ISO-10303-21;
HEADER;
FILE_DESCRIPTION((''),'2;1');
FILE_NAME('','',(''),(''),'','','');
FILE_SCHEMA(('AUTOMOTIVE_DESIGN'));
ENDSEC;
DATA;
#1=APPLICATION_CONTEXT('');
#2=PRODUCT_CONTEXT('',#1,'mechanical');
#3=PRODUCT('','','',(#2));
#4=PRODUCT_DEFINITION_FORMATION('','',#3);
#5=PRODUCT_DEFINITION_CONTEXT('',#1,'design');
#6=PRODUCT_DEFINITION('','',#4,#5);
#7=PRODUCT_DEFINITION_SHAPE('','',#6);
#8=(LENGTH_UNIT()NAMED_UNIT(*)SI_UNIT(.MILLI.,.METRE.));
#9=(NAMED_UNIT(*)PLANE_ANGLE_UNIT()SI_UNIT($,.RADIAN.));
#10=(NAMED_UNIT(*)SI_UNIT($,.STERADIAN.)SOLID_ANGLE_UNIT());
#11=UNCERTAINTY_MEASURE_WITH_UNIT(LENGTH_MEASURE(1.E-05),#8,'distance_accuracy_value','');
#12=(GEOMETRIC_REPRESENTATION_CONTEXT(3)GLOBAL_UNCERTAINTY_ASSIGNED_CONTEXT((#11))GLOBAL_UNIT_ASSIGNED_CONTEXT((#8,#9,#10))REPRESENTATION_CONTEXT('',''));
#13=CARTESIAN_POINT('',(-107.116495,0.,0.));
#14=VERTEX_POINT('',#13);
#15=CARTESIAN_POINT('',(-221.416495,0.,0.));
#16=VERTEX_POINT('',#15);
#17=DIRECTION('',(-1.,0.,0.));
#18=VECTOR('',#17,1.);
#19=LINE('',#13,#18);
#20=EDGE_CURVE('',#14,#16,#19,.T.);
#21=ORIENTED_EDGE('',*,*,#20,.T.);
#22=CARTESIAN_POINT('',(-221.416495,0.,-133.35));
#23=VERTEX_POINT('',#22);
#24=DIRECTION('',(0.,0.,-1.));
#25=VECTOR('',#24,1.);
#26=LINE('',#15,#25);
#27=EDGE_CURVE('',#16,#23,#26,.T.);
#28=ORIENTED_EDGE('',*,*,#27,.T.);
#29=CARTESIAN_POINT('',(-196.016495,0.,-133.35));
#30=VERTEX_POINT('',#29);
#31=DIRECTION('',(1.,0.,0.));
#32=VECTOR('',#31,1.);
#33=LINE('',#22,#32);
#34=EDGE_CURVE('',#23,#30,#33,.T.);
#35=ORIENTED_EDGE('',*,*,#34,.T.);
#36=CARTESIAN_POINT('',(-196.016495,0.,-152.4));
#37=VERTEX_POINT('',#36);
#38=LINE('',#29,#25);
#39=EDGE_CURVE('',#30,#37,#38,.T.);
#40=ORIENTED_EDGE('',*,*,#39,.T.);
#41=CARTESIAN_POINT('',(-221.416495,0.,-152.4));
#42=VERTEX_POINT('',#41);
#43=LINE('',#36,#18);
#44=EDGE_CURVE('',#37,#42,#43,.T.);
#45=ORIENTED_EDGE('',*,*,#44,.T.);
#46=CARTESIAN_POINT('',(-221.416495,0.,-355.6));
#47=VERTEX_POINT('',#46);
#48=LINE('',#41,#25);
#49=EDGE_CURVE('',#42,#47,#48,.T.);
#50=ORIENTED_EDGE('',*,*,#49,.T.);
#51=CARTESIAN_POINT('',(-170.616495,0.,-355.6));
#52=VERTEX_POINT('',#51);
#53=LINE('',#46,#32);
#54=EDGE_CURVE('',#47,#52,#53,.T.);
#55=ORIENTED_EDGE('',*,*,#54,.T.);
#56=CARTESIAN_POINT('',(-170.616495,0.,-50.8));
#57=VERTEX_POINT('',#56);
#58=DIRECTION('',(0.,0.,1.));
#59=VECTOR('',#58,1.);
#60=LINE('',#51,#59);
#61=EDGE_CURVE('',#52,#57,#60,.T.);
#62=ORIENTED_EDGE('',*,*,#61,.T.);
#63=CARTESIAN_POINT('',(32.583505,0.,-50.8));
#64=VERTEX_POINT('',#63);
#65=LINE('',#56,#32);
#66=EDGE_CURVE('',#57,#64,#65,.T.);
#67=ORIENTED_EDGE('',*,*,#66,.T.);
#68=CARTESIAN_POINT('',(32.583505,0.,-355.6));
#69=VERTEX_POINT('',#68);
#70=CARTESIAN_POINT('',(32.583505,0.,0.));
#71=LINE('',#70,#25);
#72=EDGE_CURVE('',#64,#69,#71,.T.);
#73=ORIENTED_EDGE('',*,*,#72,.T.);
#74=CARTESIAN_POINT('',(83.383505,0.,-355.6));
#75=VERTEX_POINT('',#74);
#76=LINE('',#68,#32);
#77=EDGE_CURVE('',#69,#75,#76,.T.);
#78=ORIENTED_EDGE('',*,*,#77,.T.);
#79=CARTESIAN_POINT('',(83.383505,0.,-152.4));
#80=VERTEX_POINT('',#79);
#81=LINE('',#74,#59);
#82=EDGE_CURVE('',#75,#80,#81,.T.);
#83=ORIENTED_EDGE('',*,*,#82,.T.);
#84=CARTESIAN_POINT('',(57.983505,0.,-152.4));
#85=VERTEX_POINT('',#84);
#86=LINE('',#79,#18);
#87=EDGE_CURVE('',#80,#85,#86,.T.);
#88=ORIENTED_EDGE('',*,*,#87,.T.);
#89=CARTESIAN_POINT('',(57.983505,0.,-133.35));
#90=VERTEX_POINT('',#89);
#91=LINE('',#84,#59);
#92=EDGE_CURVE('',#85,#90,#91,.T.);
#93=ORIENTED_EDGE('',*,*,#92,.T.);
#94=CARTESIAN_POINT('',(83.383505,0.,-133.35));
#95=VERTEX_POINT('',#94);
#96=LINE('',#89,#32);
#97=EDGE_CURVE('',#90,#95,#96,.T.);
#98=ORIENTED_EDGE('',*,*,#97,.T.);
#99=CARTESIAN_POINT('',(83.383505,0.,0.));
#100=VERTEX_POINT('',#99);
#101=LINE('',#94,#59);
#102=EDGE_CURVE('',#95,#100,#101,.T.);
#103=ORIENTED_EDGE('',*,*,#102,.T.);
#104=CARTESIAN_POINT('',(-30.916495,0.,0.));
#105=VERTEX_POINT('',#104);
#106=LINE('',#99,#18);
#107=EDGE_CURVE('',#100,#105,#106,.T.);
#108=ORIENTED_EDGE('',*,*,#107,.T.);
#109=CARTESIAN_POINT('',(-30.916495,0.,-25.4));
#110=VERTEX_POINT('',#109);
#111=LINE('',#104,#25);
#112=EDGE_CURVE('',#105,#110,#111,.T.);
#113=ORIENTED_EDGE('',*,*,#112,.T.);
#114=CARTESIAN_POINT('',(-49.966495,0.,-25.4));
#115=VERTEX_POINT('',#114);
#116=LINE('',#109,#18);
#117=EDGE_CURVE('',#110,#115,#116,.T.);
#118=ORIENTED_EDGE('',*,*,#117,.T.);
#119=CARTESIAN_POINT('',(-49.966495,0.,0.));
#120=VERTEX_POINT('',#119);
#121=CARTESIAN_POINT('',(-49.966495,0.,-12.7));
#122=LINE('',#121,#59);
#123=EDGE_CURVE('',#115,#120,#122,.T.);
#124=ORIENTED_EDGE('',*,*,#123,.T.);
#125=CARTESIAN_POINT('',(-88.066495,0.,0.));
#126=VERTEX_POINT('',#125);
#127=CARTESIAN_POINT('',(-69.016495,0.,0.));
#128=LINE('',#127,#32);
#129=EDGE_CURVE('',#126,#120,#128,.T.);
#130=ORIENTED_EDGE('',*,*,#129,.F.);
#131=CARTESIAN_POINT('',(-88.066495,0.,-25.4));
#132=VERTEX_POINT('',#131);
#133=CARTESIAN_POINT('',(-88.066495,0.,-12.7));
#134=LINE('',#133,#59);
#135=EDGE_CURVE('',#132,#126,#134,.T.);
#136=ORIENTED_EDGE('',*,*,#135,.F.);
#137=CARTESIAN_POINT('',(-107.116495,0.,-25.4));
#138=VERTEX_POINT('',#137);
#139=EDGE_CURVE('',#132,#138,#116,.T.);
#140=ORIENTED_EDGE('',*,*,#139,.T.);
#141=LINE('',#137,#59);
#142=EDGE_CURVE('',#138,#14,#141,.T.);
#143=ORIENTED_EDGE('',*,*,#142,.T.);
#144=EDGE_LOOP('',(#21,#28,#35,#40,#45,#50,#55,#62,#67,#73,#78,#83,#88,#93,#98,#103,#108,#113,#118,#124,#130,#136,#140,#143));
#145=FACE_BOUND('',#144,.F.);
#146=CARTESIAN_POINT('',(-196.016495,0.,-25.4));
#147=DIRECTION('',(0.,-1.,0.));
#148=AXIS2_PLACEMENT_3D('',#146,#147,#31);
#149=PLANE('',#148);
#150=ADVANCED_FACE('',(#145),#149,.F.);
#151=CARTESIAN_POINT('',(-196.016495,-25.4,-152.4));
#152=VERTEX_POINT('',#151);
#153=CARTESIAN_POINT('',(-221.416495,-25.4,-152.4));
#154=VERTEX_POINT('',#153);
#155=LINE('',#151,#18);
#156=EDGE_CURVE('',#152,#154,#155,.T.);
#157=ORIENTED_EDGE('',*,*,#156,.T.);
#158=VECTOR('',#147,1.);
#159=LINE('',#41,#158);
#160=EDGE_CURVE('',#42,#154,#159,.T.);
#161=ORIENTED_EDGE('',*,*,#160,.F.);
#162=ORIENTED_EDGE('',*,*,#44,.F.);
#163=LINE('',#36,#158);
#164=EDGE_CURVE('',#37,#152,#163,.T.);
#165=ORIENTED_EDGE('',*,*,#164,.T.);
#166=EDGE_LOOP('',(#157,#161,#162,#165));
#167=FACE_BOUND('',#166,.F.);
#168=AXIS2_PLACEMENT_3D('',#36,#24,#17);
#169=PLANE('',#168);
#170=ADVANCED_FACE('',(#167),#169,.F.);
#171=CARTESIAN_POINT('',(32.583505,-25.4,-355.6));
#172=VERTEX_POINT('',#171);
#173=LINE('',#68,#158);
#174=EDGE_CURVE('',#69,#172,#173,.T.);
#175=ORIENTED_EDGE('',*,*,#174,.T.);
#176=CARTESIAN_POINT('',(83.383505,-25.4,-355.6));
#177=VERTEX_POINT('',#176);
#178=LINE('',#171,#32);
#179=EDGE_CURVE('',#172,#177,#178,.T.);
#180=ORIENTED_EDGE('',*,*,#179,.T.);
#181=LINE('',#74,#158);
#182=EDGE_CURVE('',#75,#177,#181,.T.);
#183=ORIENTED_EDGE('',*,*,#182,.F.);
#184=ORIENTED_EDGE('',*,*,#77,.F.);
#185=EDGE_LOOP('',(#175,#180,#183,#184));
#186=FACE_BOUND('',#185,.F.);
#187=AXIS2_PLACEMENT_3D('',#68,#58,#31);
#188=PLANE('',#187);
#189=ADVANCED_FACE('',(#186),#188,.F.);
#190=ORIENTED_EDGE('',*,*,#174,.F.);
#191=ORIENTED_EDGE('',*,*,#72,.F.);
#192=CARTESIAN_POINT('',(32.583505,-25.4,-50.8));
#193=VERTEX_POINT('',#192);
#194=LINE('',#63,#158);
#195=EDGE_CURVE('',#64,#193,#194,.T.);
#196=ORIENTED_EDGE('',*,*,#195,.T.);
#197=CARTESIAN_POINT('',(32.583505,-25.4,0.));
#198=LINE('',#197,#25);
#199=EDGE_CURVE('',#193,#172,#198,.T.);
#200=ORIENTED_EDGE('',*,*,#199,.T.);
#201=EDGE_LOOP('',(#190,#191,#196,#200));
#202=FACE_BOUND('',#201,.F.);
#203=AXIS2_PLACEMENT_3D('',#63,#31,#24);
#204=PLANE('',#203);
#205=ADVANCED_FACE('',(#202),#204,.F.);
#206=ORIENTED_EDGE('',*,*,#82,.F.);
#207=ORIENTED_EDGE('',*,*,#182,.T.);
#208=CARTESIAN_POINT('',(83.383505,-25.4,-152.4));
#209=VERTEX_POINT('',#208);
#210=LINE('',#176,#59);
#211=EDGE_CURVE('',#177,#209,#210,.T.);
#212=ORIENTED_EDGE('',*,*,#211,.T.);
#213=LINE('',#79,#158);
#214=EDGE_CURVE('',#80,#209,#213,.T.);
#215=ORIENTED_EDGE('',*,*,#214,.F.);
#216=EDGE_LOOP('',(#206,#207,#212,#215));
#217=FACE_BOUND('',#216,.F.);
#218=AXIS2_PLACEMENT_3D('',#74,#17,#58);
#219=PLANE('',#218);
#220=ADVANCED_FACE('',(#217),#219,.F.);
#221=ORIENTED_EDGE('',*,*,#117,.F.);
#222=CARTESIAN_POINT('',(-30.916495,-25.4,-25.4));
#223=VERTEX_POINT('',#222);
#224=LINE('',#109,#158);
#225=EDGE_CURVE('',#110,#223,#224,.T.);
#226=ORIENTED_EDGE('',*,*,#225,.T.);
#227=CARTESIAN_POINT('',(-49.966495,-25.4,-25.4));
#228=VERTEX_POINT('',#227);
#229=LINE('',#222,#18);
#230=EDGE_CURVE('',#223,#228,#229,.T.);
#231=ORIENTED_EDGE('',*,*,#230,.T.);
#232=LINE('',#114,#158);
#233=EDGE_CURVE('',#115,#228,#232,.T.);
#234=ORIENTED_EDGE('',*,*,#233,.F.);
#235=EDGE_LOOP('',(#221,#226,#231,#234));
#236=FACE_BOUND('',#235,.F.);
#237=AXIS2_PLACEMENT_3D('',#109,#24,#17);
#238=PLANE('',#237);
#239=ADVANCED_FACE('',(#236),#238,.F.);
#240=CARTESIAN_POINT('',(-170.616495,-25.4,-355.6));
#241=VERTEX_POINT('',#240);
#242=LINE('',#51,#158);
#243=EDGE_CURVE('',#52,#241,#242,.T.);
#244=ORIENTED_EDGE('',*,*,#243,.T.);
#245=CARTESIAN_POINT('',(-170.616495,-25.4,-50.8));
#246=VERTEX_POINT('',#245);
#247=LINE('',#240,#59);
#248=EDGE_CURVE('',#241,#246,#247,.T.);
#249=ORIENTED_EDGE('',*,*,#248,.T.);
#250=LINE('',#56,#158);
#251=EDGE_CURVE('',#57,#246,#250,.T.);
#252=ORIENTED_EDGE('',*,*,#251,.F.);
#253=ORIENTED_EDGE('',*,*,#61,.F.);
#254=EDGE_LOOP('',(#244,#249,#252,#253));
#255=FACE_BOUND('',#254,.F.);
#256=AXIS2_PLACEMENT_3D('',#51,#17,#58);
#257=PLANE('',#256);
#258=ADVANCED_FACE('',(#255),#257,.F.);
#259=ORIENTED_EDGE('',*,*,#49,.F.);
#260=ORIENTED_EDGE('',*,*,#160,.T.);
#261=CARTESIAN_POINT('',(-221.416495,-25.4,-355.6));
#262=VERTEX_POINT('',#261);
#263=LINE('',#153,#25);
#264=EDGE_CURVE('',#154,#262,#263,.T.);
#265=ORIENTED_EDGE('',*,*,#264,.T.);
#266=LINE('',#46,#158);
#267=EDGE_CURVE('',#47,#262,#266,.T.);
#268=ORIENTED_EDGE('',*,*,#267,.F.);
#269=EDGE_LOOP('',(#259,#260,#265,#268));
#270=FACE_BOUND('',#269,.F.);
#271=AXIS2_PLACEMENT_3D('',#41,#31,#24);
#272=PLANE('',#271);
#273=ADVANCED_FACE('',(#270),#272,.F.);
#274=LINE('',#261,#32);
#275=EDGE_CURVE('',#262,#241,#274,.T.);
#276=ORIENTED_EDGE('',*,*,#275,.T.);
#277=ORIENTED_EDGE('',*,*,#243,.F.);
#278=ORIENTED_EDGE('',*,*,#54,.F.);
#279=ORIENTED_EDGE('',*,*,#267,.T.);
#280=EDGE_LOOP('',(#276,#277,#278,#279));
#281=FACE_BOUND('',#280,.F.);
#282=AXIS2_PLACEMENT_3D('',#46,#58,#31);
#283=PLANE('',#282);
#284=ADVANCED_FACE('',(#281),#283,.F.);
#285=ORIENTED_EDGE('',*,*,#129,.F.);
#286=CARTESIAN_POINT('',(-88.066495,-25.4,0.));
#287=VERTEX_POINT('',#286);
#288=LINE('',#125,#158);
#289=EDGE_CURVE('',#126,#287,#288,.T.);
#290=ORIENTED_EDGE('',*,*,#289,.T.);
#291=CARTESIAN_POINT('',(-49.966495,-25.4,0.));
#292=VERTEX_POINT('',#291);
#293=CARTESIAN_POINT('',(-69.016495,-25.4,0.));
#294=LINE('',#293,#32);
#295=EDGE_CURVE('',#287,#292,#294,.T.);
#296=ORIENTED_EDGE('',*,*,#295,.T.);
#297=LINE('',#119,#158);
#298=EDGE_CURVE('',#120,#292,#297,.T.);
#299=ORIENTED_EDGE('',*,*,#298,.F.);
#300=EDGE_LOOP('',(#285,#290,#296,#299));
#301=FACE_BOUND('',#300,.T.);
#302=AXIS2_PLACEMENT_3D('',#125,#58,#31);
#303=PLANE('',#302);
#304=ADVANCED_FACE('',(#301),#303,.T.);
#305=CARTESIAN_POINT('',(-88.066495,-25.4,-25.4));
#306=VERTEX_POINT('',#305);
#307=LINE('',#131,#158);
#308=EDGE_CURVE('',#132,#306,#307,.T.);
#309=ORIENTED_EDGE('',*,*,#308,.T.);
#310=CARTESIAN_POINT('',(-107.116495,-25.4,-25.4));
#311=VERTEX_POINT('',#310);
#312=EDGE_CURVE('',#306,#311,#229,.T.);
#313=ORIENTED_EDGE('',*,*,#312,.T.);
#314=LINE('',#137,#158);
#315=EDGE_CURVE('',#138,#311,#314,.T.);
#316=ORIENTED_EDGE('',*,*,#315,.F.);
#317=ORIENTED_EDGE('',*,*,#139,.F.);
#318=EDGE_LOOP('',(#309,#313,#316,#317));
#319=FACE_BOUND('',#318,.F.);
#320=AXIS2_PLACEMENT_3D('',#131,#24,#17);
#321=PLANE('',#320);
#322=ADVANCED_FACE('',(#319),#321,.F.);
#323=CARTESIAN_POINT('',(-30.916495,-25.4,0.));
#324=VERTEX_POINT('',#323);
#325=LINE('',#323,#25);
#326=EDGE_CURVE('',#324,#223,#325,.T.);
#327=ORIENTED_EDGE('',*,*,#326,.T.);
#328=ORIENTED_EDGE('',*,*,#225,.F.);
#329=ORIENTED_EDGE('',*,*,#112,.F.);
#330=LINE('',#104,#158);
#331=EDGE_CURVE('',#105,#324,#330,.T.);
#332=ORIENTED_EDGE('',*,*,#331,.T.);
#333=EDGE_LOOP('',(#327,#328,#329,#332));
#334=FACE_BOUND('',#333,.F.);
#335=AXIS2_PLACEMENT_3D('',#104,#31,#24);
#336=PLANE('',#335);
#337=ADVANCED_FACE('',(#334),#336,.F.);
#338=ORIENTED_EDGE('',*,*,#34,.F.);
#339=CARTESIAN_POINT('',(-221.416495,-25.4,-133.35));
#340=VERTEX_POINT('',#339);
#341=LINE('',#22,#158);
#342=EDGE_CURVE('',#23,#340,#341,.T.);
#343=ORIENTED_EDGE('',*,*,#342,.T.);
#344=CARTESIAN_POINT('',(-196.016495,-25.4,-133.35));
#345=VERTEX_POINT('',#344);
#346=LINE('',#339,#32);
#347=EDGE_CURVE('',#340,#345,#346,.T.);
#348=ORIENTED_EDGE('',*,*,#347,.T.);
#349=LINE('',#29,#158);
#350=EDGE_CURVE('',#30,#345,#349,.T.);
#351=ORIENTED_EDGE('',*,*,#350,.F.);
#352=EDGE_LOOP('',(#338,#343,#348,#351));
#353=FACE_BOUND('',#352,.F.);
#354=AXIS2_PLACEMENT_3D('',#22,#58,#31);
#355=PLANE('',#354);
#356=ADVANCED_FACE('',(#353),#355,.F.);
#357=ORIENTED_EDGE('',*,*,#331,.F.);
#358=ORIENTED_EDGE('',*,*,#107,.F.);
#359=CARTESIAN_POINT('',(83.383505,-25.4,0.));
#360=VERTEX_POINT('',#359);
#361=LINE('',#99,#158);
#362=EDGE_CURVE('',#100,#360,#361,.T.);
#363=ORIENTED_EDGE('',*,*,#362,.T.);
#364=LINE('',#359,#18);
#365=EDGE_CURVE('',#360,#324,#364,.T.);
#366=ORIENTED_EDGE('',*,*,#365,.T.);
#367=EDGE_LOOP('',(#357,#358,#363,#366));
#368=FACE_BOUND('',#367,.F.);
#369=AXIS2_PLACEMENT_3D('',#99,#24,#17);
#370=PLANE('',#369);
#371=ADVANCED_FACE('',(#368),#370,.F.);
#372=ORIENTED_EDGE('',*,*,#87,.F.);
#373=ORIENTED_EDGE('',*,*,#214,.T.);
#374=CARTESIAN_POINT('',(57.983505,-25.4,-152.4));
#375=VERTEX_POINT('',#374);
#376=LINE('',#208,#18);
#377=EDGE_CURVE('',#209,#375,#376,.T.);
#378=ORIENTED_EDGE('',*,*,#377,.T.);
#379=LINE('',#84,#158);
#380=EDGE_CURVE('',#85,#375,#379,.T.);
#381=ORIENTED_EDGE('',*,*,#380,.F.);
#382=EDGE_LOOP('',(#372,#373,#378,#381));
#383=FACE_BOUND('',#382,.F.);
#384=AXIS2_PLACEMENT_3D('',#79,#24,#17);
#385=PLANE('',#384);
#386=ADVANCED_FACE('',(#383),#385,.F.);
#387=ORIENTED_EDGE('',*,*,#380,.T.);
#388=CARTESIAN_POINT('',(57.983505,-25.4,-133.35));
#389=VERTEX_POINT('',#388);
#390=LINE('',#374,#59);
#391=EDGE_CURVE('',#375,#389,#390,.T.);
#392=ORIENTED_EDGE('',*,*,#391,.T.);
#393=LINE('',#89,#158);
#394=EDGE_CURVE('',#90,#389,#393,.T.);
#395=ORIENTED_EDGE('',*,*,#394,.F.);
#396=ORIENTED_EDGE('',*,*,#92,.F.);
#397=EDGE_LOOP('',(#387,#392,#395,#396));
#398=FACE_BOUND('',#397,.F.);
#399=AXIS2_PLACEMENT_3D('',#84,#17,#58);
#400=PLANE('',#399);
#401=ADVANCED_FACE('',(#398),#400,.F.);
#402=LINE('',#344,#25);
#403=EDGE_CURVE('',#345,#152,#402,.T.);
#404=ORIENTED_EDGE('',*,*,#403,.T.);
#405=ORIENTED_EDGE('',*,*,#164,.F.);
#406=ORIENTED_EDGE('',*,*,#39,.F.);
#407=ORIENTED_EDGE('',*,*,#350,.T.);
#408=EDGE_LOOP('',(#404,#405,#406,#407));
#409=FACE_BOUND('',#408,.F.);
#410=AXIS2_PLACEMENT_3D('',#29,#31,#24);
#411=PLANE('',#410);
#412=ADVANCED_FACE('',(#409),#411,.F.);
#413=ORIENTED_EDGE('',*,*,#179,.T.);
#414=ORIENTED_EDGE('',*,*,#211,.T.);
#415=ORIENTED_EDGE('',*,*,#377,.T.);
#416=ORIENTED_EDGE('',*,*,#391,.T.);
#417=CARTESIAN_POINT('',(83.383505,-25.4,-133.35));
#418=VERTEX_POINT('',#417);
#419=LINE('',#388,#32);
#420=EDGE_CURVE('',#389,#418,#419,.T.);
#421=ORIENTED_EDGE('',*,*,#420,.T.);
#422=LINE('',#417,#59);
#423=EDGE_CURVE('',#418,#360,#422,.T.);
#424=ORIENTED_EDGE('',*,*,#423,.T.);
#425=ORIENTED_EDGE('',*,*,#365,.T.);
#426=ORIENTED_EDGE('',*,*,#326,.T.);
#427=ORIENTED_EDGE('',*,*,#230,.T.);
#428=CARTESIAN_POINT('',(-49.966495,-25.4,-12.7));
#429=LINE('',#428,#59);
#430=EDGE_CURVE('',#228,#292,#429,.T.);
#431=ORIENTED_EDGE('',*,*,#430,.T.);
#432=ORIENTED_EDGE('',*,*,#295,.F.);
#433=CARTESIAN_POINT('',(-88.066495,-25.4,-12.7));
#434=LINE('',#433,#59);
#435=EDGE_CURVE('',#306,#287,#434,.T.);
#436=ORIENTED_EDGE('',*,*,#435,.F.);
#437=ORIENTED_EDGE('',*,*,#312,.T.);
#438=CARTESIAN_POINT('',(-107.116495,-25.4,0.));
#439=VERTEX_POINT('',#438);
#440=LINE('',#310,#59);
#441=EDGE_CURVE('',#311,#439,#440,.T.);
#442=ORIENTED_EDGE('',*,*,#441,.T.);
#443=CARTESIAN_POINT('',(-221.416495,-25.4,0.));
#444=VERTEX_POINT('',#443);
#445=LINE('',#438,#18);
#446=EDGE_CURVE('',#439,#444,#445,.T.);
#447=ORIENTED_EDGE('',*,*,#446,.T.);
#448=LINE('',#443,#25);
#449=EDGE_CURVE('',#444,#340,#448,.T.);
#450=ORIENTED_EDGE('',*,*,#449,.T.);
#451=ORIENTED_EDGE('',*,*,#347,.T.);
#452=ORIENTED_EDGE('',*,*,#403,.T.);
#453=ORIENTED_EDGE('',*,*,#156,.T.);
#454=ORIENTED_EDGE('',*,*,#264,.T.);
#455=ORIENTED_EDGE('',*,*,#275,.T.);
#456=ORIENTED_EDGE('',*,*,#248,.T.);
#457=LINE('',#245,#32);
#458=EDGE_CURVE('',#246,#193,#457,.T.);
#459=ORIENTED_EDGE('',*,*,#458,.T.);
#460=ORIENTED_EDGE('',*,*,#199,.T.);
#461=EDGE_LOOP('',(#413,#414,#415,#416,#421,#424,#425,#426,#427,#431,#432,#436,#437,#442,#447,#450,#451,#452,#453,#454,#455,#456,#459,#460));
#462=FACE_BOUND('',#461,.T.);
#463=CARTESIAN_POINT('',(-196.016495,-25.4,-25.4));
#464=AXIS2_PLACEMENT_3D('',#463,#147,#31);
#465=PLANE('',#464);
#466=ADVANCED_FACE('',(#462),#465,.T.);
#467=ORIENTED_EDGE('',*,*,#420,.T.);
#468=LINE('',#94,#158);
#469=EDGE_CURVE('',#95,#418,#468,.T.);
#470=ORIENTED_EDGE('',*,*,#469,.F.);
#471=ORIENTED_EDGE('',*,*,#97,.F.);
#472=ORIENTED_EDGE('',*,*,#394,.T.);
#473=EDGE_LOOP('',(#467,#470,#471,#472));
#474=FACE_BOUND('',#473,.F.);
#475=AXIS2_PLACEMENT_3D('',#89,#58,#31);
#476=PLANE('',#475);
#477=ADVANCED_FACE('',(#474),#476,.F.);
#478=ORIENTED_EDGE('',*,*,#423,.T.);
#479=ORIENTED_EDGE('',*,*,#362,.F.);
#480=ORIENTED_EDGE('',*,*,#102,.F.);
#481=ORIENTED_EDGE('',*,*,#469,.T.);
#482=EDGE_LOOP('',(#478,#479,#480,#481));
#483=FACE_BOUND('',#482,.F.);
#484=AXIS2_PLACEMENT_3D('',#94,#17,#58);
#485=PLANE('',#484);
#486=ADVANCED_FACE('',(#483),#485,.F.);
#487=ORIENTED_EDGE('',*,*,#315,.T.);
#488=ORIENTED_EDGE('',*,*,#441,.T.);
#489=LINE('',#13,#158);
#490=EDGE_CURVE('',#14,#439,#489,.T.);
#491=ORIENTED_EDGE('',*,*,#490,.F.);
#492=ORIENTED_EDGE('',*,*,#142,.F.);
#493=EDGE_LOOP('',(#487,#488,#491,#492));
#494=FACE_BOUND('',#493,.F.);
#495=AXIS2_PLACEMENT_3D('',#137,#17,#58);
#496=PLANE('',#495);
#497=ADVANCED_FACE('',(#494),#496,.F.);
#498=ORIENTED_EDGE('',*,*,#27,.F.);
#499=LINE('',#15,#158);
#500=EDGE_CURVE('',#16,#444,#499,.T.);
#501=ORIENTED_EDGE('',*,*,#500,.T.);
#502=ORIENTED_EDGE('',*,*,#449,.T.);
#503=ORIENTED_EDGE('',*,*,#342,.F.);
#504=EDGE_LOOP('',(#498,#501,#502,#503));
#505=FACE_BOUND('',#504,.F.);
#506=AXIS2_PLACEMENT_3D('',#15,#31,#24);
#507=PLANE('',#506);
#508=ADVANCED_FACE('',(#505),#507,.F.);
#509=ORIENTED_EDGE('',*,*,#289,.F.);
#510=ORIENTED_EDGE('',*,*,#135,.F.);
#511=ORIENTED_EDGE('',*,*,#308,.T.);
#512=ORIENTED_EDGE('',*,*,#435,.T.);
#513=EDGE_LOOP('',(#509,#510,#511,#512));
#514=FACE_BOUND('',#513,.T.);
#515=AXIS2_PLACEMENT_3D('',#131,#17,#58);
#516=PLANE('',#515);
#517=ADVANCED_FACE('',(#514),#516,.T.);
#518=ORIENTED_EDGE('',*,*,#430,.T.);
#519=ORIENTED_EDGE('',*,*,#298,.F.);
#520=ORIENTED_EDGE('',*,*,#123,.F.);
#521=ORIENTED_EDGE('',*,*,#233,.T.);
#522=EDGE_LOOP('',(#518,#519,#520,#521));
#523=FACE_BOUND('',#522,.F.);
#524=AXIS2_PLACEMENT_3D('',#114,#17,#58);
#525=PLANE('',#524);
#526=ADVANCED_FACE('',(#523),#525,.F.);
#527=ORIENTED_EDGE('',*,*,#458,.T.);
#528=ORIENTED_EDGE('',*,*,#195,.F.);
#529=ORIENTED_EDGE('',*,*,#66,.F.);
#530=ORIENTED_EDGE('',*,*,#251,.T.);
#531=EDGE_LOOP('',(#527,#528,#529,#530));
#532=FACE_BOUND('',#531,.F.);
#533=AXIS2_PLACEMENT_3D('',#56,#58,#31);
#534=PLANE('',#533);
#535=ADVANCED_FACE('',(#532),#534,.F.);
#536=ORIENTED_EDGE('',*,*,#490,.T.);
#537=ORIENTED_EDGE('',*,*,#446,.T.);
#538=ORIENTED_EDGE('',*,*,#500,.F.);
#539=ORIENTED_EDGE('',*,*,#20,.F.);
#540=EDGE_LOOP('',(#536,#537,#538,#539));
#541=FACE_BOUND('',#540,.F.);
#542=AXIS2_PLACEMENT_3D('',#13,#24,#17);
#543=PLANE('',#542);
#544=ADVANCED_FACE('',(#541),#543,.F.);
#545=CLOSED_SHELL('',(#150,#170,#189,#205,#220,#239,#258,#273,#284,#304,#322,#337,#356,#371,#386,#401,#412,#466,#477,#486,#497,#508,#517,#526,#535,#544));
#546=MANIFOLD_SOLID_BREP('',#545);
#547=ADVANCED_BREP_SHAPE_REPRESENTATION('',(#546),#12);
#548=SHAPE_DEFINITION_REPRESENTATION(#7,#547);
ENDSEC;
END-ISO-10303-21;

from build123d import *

# Parameters (mm, degrees)
F0_W     = 50.8
F0_H     = 50.8
F0_W_2   = 38.1
F0_H_2   = 25.4
F1_DEPTH = 25.4


# Not quite as in the source:
# - a feature names something its author has since deleted; it is built from what else it names


with BuildPart() as f1:
    # F0 (on Front) → F1 (new body)
    with BuildSketch(Plane.XZ):
        with Locations((-196.0164945363, -25.4)):
            Rectangle(F0_W, F0_H)
        with Locations((57.9835054637, -25.4)):
            Rectangle(F0_W, F0_H)
        Polygon((32.5835054637, -355.6), (83.3835054637, -355.6), (83.3835054637, -152.4), (57.9835054637, -152.4), (57.9835054637, -133.35), (83.3835054637, -133.35), (83.3835054637, -50.8), (32.5835054637, -50.8), align=None)
        Polygon((-170.6164945363, -355.6), (-170.6164945363, -50.8), (-221.4164945363, -50.8), (-221.4164945363, -133.35), (-196.0164945363, -133.35), (-196.0164945363, -152.4), (-221.4164945363, -152.4), (-221.4164945363, -355.6), align=None)
        Polygon((-170.6164945363, -50.8), (32.5835054637, -50.8), (32.5835054637, 0), (-30.9164945363, 0), (-30.9164945363, -25.4), (-49.9664945363, -25.4), (-88.0664945363, -25.4), (-107.1164945363, -25.4), (-107.1164945363, 0), (-170.6164945363, 0), align=None)
        with Locations((-69.0164945363, -12.7)):
            Rectangle(F0_W_2, F0_H_2)
    extrude(amount=F1_DEPTH)


solid = f1.part
